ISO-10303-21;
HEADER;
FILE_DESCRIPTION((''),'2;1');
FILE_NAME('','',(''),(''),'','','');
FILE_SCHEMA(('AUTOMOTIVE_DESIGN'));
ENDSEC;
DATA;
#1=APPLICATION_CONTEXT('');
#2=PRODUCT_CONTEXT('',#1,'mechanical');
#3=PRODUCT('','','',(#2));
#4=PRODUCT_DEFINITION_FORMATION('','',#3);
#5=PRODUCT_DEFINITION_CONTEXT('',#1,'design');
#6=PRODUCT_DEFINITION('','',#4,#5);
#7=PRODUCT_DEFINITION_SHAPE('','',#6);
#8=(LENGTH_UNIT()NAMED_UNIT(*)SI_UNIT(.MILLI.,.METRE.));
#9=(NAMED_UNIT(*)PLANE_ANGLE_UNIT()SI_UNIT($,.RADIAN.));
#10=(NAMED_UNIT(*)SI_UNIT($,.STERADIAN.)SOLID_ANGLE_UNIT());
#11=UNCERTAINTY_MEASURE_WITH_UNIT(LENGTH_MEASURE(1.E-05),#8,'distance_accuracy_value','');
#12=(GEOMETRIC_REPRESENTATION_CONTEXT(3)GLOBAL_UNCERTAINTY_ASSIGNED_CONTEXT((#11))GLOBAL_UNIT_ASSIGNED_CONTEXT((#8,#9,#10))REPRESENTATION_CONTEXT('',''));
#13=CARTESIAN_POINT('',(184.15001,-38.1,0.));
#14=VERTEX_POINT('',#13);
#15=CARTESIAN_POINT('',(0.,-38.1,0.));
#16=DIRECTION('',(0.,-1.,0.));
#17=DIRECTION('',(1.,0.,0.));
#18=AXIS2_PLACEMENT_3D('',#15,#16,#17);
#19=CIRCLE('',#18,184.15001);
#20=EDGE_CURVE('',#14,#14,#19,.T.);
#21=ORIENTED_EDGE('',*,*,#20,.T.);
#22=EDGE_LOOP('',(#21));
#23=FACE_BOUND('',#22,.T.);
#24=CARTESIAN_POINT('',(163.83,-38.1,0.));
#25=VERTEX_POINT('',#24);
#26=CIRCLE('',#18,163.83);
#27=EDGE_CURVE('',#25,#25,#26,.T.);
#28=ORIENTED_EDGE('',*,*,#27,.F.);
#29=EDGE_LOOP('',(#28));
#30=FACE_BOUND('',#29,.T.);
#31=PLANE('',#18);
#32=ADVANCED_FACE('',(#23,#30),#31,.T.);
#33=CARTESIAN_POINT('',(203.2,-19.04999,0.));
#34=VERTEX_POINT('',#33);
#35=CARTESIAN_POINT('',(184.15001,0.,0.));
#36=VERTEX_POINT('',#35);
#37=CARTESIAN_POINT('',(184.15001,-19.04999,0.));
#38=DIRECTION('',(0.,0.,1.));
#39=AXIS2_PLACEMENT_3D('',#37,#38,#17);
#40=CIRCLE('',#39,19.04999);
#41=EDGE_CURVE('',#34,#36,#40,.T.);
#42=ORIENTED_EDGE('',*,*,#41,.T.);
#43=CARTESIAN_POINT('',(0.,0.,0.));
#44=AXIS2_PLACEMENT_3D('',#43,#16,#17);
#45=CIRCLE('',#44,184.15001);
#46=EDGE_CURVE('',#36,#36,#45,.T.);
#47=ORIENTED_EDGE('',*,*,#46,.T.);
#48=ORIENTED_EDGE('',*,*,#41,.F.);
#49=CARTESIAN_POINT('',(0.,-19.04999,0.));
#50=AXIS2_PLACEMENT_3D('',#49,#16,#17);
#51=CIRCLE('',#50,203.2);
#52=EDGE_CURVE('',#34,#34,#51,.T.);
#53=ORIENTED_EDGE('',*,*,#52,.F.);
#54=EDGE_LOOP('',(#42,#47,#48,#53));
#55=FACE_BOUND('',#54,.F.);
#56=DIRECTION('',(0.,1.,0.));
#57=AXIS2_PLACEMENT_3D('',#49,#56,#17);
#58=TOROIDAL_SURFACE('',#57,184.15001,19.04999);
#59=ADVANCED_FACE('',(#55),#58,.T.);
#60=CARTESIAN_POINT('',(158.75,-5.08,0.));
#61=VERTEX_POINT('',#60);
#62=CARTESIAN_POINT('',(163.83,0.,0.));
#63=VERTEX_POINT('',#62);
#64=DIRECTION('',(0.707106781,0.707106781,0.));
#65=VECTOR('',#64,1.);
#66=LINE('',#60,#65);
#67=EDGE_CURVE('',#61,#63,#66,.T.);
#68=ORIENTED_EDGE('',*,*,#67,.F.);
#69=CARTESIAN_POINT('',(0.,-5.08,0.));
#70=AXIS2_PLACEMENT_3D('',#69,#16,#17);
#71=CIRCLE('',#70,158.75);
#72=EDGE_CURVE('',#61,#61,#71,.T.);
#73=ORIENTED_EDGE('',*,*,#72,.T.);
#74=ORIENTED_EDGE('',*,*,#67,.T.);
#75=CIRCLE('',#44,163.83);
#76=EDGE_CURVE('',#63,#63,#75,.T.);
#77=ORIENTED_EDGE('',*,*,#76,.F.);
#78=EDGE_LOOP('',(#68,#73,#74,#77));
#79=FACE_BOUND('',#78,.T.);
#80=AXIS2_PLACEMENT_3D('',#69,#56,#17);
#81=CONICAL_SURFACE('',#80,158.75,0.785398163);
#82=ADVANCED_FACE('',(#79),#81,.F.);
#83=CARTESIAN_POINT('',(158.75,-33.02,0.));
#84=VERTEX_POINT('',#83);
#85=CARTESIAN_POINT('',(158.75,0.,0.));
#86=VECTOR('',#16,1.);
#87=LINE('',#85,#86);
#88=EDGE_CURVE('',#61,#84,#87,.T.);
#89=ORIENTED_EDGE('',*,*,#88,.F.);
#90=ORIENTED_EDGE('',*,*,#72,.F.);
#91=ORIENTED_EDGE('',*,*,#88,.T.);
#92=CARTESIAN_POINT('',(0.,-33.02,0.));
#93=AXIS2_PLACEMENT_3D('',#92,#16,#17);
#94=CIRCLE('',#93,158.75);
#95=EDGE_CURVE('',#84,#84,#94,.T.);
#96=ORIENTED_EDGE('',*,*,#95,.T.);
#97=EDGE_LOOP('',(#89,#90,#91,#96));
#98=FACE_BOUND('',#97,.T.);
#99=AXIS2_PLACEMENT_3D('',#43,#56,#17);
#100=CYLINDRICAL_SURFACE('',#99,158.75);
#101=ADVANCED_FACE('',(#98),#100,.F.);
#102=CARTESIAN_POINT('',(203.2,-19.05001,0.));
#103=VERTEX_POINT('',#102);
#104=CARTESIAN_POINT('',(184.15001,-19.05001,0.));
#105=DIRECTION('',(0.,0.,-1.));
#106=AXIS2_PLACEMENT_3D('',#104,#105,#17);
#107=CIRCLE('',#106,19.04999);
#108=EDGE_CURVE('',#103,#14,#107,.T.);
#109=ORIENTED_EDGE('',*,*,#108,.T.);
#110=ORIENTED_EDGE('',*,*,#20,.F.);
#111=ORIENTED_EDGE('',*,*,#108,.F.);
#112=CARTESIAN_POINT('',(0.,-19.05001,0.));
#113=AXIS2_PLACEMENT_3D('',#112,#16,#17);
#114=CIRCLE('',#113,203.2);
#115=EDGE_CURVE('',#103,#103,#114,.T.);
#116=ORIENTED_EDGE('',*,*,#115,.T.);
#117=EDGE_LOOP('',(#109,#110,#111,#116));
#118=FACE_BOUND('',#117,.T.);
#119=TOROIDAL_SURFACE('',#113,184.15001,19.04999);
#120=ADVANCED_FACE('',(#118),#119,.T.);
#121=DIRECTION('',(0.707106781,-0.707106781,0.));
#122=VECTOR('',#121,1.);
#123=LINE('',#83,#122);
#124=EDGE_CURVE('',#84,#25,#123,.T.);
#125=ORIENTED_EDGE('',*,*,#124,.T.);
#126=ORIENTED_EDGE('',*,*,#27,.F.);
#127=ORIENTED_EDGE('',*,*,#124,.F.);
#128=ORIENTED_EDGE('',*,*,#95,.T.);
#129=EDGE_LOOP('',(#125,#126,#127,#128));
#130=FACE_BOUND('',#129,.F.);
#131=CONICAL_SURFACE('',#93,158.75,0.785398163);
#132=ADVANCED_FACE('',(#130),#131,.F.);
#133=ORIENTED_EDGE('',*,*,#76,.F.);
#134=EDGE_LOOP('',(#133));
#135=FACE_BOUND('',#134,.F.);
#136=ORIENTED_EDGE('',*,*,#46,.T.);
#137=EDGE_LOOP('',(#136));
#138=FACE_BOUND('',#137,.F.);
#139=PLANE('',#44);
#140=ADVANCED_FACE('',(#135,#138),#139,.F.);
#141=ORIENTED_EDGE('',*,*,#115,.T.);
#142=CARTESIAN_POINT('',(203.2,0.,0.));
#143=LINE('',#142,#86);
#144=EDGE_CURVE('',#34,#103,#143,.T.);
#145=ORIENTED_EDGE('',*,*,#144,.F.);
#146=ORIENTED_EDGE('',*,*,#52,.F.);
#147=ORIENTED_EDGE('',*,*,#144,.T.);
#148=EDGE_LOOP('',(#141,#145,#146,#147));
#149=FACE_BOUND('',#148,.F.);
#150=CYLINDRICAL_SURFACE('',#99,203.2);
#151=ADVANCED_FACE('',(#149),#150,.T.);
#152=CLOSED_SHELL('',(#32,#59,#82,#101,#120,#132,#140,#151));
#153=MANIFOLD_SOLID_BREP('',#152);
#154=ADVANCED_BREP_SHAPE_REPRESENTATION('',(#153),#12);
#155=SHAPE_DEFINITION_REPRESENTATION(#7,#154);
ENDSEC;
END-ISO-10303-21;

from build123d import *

# Parameters (mm, degrees)
F0_R     = 203.2
F0_R_2   = 158.75
F1_DEPTH = 38.1
F2_R     = 19.04999
F3_DEPTH = 38.1
F4_SIZE  = 5.08
F5_SIZE  = 5.08


# Not quite as in the source:
# - a fillet or chamfer is up to 0.001 mm smaller than in the source, because OpenCascade refuses the exact size


with BuildPart() as f1:
    # F0 (on Front) → F1 (new body)
    with BuildSketch(Plane.XZ):
        Circle(F0_R)
        Circle(F0_R_2, mode=Mode.SUBTRACT)
    extrude(amount=F1_DEPTH)

    # F2 (radius 19.05 in the source; OpenCascade refuses exactly that, so slightly less here)
    f2_edges = [f1.edges().sort_by_distance(p)[0] for p in [
        (-203.2, -38.1, 0),
        (-203.2, 0, 0),
    ]]
    fillet(f2_edges, radius=F2_R)

    # F3 (add): a face of the model
    f3_faces = [f1.faces().sort_by_distance(p)[0] for p in [
        (-178.9414611669, 0, 0),
    ]]
    extrude(f3_faces, amount=-F3_DEPTH)

    # F4
    f4_edges = [f1.edges().sort_by_distance(p)[0] for p in [
        (-158.75, -38.1, 0),
    ]]
    chamfer(f4_edges, length=F4_SIZE)

    # F5
    f5_edges = [f1.edges().sort_by_distance(p)[0] for p in [
        (-158.75, 0, 0),
    ]]
    chamfer(f5_edges, length=F5_SIZE)


solid = f1.part
